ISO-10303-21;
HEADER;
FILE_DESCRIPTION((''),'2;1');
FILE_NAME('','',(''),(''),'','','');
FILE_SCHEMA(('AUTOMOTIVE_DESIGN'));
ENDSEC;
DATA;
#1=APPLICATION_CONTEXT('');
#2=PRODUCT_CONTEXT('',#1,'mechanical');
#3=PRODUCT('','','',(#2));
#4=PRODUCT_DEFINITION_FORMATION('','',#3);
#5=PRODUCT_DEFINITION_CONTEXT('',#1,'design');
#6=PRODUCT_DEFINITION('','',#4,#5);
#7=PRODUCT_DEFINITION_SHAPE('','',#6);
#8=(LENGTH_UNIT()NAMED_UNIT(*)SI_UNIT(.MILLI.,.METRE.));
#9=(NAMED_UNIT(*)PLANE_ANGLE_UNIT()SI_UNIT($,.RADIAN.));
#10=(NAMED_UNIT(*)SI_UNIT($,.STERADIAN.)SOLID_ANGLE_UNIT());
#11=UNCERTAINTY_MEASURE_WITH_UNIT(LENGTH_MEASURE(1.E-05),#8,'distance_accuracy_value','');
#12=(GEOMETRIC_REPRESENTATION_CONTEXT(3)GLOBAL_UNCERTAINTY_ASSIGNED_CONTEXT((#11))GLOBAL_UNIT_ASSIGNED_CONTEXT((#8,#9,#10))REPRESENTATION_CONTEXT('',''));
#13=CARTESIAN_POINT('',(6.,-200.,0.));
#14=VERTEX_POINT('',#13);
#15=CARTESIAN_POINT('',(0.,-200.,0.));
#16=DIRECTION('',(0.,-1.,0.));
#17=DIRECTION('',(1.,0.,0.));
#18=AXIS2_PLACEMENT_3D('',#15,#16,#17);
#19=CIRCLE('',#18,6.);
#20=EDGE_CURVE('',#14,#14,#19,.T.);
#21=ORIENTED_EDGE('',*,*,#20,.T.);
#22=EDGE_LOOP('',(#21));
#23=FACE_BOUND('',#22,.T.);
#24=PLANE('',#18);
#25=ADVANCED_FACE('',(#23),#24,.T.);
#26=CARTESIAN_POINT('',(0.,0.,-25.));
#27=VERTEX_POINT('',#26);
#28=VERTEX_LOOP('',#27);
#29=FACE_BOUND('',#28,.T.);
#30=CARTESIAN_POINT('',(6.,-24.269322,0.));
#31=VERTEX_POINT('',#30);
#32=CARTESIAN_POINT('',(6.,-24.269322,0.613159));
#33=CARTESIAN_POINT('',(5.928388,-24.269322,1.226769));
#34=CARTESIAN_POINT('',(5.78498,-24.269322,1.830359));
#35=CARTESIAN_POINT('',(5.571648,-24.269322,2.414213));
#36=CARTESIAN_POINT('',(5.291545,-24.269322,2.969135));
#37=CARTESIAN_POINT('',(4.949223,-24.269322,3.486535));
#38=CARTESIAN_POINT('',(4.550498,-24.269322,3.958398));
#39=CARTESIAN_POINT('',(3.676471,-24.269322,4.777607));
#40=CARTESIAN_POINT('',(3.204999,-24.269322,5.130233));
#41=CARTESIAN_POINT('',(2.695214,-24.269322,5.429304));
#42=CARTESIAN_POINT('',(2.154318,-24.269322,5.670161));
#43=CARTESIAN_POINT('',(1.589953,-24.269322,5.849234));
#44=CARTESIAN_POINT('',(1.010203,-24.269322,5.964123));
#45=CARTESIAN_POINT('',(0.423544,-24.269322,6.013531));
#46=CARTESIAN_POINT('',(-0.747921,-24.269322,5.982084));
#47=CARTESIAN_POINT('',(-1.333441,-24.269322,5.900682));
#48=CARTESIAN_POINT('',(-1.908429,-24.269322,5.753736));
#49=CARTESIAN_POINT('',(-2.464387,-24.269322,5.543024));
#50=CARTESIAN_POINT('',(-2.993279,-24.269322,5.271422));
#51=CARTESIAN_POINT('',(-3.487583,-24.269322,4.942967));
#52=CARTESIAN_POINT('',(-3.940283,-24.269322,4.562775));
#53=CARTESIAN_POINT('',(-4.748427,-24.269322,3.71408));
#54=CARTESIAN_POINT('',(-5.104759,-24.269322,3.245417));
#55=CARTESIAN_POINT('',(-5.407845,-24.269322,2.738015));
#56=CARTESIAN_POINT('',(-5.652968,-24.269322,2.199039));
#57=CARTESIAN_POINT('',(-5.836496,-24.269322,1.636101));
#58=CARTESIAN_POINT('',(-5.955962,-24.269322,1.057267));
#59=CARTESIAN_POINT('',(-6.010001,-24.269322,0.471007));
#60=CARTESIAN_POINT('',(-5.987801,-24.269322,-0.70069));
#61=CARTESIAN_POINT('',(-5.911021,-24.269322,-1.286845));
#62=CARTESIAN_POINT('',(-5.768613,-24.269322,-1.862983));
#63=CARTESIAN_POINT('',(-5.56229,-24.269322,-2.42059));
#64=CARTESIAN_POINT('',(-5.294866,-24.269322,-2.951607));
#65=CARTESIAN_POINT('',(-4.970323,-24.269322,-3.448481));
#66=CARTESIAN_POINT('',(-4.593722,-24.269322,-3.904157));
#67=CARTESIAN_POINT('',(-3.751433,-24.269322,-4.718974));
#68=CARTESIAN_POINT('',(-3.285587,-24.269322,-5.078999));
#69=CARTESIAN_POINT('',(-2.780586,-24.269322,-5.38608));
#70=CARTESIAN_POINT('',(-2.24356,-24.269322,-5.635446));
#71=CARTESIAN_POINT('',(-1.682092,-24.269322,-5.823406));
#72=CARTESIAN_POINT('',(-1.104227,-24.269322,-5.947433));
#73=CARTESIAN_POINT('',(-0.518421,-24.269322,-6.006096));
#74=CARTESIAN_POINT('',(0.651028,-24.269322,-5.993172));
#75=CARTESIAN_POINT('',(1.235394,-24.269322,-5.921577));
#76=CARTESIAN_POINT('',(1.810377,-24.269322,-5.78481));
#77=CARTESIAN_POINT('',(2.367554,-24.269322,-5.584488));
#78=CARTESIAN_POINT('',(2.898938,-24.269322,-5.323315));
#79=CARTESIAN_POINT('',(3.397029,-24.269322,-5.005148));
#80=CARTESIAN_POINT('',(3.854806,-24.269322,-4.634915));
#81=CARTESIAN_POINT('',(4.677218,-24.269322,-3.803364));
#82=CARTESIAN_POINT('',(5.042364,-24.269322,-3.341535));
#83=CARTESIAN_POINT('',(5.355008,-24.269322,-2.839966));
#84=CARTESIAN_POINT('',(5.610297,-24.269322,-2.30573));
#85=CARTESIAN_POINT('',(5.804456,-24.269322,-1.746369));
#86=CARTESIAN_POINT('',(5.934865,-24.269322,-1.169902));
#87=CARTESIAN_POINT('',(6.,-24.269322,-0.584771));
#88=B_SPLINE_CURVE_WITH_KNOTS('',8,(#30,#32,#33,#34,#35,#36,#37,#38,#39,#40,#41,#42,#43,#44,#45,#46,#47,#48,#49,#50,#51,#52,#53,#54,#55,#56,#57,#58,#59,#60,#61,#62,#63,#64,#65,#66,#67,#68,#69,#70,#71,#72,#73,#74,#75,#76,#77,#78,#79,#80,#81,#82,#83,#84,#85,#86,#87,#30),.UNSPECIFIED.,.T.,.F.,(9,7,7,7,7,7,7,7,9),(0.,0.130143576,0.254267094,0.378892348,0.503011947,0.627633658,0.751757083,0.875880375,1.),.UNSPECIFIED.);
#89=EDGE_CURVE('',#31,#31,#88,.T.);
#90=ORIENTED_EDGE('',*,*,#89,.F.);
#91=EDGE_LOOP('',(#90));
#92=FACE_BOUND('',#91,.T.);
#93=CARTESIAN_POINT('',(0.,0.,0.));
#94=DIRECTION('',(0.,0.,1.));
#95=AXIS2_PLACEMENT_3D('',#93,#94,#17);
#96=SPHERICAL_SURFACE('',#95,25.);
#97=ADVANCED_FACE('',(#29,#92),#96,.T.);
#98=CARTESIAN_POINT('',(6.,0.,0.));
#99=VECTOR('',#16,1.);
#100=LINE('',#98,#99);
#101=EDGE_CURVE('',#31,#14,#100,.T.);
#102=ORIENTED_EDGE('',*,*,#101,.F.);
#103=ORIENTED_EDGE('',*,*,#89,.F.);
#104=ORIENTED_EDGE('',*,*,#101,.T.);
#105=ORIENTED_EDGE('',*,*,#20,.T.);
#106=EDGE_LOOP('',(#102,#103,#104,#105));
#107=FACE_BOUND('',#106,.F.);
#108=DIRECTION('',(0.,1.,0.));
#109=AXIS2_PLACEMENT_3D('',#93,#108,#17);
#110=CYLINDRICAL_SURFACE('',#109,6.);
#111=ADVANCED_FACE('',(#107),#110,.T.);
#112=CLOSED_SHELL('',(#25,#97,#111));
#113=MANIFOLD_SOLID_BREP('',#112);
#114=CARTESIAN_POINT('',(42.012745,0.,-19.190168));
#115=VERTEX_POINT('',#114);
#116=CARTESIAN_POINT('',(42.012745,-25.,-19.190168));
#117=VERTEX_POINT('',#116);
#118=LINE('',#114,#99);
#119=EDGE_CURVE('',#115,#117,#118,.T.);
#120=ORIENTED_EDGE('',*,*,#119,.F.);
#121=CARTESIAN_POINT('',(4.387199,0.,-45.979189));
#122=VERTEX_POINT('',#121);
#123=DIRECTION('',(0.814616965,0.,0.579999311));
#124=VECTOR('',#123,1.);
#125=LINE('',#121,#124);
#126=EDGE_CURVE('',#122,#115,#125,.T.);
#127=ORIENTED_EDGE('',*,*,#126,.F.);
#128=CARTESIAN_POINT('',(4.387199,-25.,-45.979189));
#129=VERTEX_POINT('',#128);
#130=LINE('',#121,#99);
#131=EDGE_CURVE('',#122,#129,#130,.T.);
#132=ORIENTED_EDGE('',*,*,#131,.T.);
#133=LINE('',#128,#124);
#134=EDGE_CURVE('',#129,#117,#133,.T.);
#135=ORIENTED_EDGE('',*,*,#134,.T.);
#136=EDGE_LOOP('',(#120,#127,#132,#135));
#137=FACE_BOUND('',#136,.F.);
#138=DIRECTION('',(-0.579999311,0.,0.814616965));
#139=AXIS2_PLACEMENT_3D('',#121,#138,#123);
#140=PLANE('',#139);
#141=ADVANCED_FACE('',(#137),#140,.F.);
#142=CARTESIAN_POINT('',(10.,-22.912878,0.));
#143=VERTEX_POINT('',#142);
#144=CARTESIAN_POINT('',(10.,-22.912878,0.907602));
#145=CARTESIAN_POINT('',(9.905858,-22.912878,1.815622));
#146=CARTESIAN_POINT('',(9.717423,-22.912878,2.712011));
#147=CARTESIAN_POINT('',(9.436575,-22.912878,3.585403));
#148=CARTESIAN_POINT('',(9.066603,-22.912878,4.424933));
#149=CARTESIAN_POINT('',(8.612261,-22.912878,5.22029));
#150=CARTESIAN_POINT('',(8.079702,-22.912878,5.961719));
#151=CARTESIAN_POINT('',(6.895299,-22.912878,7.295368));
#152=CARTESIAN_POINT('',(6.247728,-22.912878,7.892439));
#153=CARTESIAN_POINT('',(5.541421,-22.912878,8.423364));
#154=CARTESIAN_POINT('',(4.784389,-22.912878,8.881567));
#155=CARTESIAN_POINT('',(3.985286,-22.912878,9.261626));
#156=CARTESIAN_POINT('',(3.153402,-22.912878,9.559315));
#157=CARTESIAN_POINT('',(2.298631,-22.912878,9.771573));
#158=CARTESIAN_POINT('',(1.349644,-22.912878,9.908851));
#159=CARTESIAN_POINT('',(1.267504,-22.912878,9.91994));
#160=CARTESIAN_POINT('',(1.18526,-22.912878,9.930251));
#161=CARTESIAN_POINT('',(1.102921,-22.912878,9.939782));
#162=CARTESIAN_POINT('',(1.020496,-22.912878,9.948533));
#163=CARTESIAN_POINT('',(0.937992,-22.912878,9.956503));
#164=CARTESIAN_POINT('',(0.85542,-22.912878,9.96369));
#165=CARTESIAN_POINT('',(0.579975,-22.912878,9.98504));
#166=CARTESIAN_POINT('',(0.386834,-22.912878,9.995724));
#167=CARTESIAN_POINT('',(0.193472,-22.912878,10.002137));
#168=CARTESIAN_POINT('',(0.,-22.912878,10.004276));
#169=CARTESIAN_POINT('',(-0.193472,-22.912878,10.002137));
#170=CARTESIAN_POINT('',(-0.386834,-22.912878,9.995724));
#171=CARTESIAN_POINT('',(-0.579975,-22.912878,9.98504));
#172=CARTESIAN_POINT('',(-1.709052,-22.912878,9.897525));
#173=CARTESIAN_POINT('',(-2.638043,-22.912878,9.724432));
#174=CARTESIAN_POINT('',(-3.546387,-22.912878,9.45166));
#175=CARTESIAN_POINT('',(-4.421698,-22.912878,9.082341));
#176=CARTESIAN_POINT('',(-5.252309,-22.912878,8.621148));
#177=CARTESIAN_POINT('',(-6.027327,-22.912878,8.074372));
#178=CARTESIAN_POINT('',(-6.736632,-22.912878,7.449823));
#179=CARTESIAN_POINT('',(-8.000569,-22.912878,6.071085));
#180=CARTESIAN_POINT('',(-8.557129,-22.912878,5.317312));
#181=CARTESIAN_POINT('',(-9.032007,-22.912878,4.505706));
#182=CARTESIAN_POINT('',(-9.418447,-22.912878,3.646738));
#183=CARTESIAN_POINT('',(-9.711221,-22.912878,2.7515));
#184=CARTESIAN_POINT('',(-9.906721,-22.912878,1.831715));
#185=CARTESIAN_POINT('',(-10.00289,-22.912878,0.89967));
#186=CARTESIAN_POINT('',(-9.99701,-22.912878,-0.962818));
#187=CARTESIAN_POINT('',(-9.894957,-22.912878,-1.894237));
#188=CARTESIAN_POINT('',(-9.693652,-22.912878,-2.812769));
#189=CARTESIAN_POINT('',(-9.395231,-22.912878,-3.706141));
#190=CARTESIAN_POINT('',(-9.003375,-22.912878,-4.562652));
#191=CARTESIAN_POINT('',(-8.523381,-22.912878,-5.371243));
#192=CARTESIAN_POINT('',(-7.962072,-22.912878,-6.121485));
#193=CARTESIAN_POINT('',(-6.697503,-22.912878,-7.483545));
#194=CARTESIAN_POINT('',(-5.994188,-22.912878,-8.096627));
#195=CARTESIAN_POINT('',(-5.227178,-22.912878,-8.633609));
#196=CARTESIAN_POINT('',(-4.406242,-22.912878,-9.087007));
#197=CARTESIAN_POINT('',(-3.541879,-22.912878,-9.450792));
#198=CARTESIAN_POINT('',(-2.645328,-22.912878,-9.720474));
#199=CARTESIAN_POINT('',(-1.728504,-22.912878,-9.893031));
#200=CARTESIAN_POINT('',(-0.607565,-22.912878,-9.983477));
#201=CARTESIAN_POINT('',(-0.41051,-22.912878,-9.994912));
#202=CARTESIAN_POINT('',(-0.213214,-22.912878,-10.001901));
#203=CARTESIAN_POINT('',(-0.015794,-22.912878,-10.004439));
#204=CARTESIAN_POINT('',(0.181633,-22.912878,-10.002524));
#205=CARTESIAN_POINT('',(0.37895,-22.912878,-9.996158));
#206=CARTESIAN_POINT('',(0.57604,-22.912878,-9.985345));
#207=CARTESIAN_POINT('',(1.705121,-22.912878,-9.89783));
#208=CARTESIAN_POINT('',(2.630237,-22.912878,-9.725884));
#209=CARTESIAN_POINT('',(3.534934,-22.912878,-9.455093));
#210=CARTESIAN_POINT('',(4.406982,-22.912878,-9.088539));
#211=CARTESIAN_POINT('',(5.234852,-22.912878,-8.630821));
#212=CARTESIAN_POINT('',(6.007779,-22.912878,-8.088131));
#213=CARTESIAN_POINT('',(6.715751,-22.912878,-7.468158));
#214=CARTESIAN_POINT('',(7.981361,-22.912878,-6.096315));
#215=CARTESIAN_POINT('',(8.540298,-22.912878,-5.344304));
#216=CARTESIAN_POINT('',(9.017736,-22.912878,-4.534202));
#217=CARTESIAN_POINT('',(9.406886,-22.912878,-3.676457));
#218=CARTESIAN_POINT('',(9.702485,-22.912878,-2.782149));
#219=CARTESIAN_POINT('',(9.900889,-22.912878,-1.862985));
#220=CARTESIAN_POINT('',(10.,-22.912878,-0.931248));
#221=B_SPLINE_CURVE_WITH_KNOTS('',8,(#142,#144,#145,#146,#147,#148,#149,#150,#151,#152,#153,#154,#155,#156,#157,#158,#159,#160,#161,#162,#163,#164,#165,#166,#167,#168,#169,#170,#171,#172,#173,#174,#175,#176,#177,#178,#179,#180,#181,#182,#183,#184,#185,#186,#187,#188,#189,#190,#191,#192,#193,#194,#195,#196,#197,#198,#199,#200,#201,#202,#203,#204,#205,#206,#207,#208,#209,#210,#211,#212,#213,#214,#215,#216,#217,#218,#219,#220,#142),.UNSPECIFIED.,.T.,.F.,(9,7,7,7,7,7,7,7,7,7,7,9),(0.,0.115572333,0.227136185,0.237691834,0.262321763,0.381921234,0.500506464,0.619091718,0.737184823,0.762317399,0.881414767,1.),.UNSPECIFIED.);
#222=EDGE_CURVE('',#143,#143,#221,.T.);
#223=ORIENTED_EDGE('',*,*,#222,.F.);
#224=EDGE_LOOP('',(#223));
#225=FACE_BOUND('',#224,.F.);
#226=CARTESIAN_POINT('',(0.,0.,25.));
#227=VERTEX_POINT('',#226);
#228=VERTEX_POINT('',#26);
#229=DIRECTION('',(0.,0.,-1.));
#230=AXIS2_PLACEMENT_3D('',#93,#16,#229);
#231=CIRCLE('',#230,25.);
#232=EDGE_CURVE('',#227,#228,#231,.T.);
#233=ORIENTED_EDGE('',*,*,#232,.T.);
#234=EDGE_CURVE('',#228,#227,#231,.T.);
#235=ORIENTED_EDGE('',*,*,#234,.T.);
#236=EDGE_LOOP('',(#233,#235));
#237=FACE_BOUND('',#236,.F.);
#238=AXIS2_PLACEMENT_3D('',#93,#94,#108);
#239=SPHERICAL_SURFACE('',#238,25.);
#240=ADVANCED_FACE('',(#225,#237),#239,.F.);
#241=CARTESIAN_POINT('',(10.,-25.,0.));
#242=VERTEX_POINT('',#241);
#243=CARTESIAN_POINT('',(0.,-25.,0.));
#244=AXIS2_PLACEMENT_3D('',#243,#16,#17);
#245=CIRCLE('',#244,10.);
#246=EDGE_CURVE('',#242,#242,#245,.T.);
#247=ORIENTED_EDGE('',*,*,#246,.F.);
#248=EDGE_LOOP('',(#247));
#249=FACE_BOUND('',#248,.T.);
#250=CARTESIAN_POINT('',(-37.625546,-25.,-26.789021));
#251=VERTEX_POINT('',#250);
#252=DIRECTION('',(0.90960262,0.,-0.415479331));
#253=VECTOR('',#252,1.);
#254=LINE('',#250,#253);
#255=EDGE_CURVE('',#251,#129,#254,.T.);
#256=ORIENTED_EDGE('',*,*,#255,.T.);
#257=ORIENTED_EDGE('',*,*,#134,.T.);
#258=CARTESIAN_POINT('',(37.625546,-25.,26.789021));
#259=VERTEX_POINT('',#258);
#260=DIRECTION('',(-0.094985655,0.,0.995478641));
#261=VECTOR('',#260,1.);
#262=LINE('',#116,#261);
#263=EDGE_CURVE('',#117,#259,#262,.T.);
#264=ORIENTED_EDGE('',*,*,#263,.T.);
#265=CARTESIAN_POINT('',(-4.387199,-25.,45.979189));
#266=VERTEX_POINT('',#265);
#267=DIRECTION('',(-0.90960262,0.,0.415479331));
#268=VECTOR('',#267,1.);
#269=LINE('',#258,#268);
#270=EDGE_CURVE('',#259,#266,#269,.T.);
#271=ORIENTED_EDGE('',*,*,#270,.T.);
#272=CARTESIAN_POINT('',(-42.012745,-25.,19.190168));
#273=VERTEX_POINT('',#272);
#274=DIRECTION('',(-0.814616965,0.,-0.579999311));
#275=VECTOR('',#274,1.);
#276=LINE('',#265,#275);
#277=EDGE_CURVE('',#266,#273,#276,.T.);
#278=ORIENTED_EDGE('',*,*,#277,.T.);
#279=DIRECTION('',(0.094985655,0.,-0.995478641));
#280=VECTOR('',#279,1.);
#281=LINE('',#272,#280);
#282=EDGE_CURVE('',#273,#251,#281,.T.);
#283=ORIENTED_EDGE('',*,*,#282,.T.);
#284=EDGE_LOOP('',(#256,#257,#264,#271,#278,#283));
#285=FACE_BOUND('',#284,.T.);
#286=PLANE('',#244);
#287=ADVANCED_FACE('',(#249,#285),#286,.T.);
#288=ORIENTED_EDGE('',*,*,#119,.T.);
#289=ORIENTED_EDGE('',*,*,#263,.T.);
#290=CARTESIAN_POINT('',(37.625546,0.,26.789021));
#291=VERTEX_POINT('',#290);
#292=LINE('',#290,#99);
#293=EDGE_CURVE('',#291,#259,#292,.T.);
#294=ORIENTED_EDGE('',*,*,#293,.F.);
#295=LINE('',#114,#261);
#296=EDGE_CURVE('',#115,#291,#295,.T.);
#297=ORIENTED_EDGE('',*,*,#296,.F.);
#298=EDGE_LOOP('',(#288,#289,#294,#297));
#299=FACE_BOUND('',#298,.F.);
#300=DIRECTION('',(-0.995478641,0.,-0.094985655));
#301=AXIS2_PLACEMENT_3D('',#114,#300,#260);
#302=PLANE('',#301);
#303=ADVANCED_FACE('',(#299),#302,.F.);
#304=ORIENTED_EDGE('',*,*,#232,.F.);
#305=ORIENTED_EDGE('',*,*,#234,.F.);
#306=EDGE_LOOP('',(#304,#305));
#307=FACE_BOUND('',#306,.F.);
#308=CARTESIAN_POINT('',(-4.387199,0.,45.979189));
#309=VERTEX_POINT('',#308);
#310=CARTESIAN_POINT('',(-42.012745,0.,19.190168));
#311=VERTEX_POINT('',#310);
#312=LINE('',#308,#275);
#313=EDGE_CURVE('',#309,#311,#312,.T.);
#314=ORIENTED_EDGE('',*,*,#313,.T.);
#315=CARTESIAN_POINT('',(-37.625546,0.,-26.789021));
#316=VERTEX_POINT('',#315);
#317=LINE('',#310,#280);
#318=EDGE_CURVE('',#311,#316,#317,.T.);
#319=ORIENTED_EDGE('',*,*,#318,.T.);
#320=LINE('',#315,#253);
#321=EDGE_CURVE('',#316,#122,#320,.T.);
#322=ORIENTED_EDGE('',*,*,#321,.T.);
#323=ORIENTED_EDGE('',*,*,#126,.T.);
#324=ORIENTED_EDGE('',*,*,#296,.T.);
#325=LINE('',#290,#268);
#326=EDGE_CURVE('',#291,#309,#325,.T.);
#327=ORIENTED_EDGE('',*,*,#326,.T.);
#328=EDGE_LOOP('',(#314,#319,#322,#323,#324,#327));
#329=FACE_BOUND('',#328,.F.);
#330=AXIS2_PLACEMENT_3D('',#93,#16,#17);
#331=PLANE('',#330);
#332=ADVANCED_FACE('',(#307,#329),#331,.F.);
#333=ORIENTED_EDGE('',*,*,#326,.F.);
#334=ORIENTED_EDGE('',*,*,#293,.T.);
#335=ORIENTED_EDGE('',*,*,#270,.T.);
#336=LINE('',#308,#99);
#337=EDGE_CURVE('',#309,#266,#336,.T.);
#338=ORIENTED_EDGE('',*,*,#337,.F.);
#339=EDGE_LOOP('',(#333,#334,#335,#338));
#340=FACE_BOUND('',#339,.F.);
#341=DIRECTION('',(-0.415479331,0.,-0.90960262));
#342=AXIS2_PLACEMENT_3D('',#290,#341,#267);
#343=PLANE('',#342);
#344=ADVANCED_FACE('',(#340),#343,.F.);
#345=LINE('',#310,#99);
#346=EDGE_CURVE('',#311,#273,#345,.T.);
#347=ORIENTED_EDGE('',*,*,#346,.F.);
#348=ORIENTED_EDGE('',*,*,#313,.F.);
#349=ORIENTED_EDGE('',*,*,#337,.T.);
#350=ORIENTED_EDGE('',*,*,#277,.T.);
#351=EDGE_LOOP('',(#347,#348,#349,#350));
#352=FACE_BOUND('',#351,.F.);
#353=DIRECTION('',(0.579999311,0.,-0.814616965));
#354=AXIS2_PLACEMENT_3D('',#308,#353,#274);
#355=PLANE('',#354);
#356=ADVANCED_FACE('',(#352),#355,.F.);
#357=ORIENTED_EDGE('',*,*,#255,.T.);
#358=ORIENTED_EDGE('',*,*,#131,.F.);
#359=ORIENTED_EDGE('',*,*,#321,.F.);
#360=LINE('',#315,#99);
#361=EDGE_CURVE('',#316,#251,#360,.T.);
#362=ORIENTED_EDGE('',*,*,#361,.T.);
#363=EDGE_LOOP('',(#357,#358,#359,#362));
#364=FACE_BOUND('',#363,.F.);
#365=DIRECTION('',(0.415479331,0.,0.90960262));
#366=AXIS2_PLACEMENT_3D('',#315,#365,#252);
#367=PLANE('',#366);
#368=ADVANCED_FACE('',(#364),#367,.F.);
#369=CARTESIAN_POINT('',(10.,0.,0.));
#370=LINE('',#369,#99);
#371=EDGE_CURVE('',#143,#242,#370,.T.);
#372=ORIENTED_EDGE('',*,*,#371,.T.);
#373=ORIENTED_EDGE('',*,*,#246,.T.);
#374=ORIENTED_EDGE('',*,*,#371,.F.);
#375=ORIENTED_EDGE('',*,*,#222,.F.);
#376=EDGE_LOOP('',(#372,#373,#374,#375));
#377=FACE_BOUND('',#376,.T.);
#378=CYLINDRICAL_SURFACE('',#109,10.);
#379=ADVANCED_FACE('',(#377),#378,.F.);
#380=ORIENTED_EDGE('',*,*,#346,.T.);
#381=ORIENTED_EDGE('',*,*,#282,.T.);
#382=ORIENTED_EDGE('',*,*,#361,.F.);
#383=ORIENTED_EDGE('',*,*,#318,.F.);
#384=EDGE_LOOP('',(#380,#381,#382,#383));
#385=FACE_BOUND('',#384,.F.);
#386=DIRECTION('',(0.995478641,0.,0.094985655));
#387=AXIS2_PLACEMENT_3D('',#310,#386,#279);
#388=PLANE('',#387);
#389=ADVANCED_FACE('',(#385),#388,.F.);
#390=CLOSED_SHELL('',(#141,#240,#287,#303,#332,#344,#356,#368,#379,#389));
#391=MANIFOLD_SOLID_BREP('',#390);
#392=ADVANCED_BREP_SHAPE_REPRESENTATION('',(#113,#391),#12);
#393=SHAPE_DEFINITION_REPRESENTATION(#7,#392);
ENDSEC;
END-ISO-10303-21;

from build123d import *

# Parameters (mm, degrees)
F2_R     = 6
F3_DEPTH = 200
F4_R     = 10
F5_DEPTH = 25


with BuildPart() as f1:
    # F0 (on Front) → F1 (revolve)
    with BuildSketch(Plane.XZ):
        with BuildLine():
            Line((0, 25), (0, -25))
            ThreePointArc((0, -25), (25, 0), (0, 25))
        make_face()
    revolve(axis=Axis((0, 0, 0), (0, 0, 1)))

    # F2 (on Front) → F3 (join)
    with BuildSketch(Plane.XZ):
        Circle(F2_R)
    extrude(amount=F3_DEPTH)


with BuildPart() as f5:
    # F4 (on Front) → F5 (new body)
    with BuildSketch(Plane.XZ):
        Polygon((-42.0127453861, 19.1901682759), (-37.6255459229, -26.7890206491), (4.3871994632, -45.979188925), (42.0127453861, -19.1901682759), (37.6255459229, 26.7890206491), (-4.3871994632, 45.979188925), align=None)
        Circle(F4_R, mode=Mode.SUBTRACT)
    extrude(amount=F5_DEPTH)

    # F6 (on Right) → F7 (revolve, cut)
    with BuildSketch(Plane.YZ):
        with BuildLine():
            Line((0, 25), (0, -25))
            ThreePointArc((0, -25), (25, 0), (0, 25))
        make_face()
    revolve(axis=Axis((0, 0, 0), (0, 0, 1)), mode=Mode.SUBTRACT)


solid = Compound([f1.part, f5.part])
